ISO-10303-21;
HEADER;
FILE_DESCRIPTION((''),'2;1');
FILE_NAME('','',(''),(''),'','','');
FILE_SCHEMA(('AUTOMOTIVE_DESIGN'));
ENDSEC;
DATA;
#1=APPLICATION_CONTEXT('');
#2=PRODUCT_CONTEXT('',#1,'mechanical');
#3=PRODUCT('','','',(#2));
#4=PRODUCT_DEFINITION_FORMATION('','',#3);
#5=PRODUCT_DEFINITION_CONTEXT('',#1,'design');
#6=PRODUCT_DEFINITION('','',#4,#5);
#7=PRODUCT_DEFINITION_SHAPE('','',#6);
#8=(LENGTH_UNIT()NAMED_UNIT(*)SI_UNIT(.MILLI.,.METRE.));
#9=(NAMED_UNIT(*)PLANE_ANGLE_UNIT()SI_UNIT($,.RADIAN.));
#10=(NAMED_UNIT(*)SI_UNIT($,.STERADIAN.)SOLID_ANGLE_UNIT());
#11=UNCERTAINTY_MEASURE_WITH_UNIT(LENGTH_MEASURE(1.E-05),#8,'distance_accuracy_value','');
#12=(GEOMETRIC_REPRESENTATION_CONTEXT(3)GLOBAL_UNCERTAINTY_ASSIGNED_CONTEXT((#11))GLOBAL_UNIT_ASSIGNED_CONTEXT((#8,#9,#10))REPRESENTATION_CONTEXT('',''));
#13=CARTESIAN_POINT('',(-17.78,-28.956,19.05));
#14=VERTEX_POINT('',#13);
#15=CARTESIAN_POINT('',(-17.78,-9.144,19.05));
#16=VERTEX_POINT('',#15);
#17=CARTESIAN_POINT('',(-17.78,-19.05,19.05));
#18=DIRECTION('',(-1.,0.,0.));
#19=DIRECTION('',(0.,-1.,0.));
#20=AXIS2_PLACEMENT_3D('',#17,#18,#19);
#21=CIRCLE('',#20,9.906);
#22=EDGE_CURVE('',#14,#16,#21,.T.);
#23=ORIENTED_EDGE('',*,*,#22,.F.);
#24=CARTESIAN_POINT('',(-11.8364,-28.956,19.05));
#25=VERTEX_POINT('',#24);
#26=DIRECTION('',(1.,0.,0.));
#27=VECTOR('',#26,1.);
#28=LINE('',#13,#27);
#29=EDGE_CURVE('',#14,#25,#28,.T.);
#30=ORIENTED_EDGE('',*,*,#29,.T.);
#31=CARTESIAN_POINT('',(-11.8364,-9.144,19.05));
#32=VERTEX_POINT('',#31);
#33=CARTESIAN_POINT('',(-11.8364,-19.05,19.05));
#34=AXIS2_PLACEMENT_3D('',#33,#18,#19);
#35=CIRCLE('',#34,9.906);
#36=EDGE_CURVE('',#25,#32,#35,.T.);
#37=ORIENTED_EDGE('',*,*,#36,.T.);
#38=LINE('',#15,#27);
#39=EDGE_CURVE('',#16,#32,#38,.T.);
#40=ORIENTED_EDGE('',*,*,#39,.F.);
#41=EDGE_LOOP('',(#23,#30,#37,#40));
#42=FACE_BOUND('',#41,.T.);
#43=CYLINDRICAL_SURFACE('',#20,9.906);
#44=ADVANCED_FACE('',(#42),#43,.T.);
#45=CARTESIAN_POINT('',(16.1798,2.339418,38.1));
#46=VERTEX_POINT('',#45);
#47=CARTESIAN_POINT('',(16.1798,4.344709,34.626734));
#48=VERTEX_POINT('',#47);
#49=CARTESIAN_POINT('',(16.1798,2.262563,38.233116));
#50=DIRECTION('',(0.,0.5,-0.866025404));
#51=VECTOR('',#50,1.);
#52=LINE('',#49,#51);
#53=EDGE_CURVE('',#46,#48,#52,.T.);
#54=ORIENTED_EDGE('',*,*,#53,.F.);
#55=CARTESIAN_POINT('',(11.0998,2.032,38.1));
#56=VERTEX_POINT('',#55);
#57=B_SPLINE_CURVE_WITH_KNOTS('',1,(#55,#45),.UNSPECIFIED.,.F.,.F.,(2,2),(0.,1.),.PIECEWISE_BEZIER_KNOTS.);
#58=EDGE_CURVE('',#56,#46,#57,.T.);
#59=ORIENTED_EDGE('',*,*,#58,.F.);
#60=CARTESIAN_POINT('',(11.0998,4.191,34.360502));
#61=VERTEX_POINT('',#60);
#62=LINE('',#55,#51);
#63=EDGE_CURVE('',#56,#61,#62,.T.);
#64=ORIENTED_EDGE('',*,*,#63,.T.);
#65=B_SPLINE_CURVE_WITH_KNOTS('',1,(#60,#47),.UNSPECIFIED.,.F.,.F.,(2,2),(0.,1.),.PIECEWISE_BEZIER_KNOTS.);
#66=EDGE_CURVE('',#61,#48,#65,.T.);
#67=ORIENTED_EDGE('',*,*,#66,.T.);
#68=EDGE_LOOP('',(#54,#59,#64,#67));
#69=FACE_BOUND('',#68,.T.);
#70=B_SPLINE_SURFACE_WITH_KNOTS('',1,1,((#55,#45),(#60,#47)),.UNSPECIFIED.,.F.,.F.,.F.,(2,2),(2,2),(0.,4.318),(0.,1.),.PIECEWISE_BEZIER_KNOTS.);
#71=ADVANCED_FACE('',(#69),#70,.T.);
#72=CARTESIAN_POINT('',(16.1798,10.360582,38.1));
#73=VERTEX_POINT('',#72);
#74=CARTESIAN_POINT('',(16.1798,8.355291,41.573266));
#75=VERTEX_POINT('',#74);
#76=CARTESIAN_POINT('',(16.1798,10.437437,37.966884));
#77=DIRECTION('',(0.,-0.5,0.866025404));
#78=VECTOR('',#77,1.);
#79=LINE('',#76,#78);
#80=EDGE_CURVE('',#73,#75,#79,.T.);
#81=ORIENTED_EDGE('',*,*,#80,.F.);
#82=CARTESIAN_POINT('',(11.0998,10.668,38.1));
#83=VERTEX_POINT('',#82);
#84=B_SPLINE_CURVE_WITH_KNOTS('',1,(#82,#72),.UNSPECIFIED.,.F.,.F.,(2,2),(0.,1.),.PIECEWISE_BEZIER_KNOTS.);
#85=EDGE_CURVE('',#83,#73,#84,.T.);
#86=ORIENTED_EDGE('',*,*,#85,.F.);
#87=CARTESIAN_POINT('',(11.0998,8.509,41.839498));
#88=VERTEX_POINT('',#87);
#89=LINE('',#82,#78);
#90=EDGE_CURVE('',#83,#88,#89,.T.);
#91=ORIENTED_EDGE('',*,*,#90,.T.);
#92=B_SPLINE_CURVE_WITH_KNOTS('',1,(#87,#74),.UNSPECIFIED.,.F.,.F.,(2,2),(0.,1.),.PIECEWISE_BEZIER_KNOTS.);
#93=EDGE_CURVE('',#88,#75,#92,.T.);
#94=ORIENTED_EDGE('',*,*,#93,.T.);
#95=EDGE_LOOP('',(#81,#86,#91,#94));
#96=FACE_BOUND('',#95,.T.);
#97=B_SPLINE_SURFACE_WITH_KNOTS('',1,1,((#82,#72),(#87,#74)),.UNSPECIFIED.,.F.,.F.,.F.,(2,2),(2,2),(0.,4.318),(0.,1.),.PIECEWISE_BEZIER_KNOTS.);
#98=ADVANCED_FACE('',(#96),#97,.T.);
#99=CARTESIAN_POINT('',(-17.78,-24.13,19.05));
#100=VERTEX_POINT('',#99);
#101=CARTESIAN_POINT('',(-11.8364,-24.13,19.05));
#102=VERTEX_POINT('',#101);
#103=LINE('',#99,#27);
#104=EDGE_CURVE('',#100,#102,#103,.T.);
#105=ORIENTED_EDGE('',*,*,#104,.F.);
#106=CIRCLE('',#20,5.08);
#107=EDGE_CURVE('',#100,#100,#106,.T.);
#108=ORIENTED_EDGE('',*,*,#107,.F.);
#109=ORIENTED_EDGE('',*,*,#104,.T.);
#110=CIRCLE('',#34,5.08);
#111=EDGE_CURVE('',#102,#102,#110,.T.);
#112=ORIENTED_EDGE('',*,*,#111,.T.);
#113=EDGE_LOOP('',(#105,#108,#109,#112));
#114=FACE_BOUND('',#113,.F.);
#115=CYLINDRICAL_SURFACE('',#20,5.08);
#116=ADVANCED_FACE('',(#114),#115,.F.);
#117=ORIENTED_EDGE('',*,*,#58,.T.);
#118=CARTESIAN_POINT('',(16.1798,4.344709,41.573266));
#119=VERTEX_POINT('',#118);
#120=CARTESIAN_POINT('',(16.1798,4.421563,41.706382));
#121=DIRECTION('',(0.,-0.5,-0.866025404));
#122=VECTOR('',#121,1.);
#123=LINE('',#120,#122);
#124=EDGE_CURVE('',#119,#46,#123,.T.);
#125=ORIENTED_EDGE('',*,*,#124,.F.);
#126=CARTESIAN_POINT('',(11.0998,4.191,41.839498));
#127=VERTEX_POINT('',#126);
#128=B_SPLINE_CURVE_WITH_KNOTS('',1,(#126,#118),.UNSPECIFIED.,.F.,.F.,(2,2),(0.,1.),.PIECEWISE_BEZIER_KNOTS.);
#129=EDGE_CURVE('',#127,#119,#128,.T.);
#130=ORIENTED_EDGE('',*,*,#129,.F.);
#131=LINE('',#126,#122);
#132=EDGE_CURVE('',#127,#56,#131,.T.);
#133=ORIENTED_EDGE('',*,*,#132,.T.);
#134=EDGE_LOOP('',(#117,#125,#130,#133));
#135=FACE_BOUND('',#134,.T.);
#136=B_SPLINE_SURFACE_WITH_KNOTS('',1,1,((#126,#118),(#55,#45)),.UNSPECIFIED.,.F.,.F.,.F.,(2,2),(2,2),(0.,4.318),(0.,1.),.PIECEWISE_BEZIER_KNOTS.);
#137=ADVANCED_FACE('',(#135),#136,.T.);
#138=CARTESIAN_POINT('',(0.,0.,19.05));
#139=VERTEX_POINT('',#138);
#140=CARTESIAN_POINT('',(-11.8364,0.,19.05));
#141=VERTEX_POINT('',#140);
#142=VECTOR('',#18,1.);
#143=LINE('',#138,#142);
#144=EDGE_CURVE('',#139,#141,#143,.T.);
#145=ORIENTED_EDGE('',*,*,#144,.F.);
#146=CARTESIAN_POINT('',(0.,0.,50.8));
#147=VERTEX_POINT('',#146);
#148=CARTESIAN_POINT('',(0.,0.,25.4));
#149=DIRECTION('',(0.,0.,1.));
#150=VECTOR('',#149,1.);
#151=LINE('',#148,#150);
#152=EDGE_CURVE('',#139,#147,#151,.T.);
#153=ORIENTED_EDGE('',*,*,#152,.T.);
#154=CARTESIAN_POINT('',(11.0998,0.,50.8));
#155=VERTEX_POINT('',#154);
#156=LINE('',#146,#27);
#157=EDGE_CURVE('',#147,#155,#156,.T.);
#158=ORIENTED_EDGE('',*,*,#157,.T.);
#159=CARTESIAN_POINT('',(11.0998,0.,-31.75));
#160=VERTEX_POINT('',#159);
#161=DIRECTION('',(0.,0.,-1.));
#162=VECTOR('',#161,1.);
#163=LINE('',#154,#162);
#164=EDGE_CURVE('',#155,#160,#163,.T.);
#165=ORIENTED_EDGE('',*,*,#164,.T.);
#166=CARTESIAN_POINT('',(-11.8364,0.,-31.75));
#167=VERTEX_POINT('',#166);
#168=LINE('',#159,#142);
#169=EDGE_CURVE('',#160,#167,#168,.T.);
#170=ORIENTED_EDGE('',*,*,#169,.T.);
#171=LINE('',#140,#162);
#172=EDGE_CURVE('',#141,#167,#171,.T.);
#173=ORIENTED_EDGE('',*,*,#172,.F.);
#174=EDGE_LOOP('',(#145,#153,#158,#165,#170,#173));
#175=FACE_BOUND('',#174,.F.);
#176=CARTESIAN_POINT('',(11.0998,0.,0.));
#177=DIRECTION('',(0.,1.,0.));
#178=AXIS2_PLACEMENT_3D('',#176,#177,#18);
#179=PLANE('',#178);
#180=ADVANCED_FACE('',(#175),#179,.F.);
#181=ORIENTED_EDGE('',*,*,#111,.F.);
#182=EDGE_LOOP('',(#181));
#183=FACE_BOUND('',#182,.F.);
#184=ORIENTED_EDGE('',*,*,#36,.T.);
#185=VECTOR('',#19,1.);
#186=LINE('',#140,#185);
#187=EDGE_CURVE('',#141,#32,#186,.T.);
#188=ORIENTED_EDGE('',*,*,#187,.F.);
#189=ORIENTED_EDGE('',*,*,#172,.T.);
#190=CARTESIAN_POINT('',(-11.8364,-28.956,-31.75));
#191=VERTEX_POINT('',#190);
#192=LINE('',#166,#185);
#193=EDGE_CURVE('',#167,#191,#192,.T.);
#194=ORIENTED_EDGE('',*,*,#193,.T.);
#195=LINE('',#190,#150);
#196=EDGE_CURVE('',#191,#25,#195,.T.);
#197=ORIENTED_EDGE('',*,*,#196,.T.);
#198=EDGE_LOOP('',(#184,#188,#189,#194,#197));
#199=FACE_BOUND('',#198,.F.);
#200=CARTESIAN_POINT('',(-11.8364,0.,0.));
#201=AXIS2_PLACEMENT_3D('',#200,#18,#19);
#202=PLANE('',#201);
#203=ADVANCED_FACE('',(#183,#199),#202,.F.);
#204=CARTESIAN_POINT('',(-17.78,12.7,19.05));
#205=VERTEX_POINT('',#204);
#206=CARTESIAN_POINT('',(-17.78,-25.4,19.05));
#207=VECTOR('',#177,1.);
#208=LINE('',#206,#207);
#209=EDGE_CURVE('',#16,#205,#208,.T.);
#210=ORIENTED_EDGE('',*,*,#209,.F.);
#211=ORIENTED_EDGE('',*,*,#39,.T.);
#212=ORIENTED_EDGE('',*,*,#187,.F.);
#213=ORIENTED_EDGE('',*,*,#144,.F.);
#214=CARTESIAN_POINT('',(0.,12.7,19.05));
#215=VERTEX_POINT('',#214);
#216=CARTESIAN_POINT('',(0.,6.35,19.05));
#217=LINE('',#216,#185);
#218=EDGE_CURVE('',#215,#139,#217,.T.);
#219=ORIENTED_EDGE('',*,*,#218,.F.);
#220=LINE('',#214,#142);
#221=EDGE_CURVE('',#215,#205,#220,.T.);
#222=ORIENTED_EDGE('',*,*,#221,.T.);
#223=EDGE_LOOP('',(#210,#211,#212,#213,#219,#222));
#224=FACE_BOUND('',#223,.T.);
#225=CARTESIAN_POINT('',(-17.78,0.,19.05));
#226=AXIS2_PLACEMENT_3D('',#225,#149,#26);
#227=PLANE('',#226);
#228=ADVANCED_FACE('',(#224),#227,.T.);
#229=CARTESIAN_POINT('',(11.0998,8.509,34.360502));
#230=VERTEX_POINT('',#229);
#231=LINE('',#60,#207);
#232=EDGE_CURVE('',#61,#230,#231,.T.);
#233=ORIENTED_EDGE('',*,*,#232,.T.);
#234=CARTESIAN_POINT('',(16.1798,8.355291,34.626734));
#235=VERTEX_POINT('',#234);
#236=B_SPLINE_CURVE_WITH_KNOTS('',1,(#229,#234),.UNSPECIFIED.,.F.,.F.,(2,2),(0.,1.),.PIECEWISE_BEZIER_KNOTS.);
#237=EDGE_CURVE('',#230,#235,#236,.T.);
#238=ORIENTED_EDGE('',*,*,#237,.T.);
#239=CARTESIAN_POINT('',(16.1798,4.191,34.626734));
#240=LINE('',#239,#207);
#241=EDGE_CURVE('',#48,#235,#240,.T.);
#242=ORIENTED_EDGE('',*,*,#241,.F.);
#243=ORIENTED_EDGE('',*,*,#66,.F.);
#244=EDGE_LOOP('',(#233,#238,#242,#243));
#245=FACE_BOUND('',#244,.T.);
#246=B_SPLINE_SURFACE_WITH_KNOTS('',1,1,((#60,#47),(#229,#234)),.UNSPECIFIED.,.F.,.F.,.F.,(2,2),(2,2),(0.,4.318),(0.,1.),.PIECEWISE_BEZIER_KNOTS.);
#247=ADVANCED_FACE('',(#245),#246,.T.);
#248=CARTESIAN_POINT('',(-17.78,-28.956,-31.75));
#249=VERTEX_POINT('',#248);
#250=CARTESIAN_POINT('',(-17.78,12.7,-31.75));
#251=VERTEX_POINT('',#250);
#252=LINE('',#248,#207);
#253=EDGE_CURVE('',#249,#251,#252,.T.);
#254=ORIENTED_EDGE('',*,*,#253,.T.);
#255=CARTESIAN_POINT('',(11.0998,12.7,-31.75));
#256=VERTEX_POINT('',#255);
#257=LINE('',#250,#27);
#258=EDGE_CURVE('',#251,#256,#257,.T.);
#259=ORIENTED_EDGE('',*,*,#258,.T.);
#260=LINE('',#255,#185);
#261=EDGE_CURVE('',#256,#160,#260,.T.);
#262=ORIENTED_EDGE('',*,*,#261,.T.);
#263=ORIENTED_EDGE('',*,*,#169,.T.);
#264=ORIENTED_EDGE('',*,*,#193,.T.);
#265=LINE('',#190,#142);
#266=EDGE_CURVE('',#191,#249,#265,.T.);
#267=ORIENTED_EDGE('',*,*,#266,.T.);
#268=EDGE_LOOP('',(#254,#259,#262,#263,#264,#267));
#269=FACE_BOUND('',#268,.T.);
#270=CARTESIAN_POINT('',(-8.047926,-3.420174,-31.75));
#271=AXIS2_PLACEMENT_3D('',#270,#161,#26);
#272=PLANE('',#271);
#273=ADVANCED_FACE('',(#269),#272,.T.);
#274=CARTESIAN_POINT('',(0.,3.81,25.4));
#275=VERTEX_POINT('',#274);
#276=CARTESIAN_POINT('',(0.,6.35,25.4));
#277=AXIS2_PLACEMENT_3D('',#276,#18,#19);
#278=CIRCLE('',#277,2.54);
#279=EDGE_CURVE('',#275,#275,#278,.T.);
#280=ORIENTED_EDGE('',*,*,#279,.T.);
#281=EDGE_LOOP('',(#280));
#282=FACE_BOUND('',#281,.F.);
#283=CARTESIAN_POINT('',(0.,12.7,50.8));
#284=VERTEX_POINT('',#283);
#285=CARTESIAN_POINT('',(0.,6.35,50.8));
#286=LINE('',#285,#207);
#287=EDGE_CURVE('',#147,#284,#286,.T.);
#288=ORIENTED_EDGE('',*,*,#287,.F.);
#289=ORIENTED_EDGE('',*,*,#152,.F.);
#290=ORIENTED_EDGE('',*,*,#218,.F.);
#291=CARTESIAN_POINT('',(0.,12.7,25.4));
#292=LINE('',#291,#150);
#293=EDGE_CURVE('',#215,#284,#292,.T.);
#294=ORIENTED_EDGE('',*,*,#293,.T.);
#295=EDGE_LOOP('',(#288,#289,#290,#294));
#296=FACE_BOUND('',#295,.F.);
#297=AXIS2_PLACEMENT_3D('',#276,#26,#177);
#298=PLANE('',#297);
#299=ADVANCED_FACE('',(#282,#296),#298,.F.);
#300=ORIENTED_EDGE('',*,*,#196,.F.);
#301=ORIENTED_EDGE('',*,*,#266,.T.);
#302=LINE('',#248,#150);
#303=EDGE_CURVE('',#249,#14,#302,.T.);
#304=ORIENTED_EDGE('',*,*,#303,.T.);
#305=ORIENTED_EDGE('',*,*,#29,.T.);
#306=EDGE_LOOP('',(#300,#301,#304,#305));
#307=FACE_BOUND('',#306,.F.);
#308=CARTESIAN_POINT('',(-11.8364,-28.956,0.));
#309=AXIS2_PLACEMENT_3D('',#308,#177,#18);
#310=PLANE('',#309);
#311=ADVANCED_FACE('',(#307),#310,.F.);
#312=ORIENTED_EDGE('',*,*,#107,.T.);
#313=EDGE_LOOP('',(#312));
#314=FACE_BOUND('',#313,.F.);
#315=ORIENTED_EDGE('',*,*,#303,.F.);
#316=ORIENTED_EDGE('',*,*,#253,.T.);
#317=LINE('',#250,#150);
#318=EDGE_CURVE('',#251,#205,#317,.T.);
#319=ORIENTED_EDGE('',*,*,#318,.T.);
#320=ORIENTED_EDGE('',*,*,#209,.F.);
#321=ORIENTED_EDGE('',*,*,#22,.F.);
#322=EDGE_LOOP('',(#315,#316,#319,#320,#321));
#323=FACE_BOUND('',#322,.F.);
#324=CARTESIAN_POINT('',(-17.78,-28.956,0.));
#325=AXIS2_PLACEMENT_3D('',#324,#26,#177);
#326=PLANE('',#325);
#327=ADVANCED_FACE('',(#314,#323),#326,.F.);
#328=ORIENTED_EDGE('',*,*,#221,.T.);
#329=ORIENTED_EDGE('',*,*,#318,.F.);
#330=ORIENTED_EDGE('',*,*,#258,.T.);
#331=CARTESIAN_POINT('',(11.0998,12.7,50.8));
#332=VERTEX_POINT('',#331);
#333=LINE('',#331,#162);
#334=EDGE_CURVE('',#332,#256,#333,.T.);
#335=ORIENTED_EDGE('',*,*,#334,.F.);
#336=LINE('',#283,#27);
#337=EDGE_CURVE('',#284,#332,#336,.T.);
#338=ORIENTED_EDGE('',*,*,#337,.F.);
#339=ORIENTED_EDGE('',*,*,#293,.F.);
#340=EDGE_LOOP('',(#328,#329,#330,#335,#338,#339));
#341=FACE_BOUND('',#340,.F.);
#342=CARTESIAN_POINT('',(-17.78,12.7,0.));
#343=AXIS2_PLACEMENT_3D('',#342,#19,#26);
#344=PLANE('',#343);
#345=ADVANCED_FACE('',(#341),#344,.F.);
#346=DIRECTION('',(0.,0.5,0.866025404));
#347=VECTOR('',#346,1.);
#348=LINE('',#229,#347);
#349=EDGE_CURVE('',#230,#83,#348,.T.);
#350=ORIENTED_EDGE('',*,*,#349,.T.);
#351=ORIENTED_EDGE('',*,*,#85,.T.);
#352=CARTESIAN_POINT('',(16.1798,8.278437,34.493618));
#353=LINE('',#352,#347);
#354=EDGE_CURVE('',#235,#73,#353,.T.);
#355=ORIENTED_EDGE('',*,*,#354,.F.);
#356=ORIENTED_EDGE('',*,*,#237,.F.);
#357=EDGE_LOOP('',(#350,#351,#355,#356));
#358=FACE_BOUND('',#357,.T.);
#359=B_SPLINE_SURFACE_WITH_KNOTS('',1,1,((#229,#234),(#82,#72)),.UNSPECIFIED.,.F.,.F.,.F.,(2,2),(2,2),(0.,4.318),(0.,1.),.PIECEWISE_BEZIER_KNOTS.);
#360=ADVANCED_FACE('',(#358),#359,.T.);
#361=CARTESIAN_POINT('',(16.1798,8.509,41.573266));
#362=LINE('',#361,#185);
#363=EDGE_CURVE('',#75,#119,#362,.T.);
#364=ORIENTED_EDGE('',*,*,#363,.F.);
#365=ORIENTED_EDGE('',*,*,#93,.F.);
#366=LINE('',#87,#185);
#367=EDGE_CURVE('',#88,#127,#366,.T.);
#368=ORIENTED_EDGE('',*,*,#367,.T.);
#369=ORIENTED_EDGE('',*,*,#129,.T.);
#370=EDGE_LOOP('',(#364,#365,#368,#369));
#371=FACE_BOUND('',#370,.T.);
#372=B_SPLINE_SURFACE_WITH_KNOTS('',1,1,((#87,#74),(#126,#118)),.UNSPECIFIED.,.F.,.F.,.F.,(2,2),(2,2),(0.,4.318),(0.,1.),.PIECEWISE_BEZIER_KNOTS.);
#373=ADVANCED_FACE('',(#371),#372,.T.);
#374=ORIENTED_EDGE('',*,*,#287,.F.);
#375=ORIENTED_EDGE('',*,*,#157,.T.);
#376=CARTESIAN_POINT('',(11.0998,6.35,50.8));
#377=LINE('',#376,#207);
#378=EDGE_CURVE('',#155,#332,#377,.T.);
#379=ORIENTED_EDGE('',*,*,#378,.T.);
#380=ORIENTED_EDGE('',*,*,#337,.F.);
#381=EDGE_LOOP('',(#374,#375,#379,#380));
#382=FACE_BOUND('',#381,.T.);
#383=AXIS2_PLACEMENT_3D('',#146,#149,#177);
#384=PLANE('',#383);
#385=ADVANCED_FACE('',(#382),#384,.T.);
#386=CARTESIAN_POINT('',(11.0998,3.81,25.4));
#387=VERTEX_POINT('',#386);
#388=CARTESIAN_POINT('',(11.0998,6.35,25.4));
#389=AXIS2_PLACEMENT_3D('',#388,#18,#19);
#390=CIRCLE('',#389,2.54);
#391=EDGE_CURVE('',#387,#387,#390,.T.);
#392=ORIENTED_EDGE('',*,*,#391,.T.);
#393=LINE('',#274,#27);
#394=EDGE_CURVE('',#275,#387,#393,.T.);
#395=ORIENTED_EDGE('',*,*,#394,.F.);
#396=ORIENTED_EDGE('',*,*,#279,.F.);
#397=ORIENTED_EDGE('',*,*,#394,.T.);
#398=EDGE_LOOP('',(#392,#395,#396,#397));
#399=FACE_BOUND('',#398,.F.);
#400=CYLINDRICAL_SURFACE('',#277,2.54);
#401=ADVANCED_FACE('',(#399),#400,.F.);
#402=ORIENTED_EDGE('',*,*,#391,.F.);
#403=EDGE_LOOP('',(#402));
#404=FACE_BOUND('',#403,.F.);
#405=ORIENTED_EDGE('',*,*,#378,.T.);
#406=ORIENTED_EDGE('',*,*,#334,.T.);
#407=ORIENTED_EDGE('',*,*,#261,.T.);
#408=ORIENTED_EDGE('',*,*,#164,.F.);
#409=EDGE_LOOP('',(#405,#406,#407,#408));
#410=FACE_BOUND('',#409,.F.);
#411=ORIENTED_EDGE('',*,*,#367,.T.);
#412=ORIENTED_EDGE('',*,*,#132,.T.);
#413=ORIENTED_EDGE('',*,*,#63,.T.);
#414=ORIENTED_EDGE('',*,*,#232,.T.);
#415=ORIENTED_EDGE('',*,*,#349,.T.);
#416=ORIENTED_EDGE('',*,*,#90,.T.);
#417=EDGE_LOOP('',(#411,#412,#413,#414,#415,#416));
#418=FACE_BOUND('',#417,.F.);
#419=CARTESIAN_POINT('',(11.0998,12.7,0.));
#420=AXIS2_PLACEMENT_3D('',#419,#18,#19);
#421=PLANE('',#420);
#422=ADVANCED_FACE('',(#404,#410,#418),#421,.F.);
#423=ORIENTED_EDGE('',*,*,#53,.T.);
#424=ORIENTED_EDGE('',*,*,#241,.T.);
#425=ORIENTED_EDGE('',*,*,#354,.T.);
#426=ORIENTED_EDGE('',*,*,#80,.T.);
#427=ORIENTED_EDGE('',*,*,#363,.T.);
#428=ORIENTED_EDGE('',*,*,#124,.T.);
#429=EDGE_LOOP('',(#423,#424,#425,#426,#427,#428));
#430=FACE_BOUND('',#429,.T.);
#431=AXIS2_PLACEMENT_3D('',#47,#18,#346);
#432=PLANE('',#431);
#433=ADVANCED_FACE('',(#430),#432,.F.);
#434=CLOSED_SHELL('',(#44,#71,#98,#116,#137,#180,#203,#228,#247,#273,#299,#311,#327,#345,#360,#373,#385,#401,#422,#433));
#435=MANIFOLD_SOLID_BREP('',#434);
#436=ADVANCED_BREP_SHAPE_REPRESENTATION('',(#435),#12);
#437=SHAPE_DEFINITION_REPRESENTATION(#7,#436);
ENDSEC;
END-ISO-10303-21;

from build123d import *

# Parameters (mm, degrees)
F0_W      = 12.7
F0_H      = 50.8
F1_DEPTH  = 11.0998
F3_DEPTH  = 5.08
F3_TAPER  = 3
F4_R      = 2.54
F5_DEPTH  = 16.1808001
F6_W      = 12.7
F6_H      = 19.05
F7_DEPTH  = 17.78
F8_W      = 5.9436
F8_H      = 19.05
F9_DEPTH  = 25.4
F10_W     = 5.9436
F10_H     = 12.7
F11_DEPTH = 6.35
F12_R     = 6.34999
F13_R     = 5.08
F14_DEPTH = 33.9608001
F16_DEPTH = 5.9436
F18_DEPTH = 31.75


# Not quite as in the source:
# - a fillet or chamfer is up to 0.001 mm smaller than in the source, because OpenCascade refuses the exact size


with BuildPart() as f1:
    # F0 (on Right) → F1 (new body)
    with BuildSketch(Plane.YZ):
        with Locations((6.35, 25.4)):
            Rectangle(F0_W, F0_H)
    extrude(amount=F1_DEPTH)

    # F2 (on face) → F3 (join)
    with BuildSketch(Plane.YZ.offset(11.0998)):
        Polygon((4.191, 34.3605023065), (8.509, 34.3605023065), (10.668, 38.1), (8.509, 41.8394976935), (4.191, 41.8394976935), (2.032, 38.1), align=None)
    extrude(amount=F3_DEPTH, taper=F3_TAPER)

    # F4 (on face) → F5 (cut, through all)
    with BuildSketch(Plane(origin=(0, 0, 0), x_dir=(0, -1, 0), z_dir=(-1, 0, 0))):
        with Locations((-6.35, 25.4)):
            Circle(F4_R)
    extrude(amount=-F5_DEPTH, mode=Mode.SUBTRACT)

    # F6 (on face) → F7 (join)
    with BuildSketch(Plane(origin=(0, 0, 0), x_dir=(0, -1, 0), z_dir=(-1, 0, 0))):
        with Locations((-6.35, 9.525)):
            Rectangle(F6_W, F6_H)
    extrude(amount=F7_DEPTH)

    # F8 (on face) → F9 (join)
    with BuildSketch(Plane.XZ):
        with Locations((-14.8082, 9.525)):
            Rectangle(F8_W, F8_H)
    extrude(amount=F9_DEPTH)

    # F10 (on face) → F11 (join)
    with BuildSketch(Plane.XY.offset(19.05)):
        with Locations((-14.8082, -19.05)):
            Rectangle(F10_W, F10_H)
    extrude(amount=F11_DEPTH)

    # F12 (radius 6.35 in the source; OpenCascade refuses exactly that, so slightly less here)
    f12_edges = [f1.edges().sort_by_distance(p)[0] for p in [
        (-14.8082, -12.7, 25.4),
        (-14.8082, -25.4, 25.4),
    ]]
    fillet(f12_edges, radius=F12_R)

    # F13 (on face) → F14 (cut, through all)
    with BuildSketch(Plane(origin=(-17.78, 0, 0), x_dir=(0, -1, 0), z_dir=(-1, 0, 0))):
        with Locations((19.05, 19.05)):
            Circle(F13_R)
    extrude(amount=-F14_DEPTH, mode=Mode.SUBTRACT)

    # F15 (on face) → F16 (join, through all)
    with BuildSketch(Plane(origin=(-17.78, 0, 0), x_dir=(0, -1, 0), z_dir=(-1, 0, 0))):
        with BuildLine():
            Line((28.956, 0), (28.956, 19.05))
            ThreePointArc((28.956, 19.05), (19.05, 28.956), (9.144, 19.05))
            Line((9.144, 19.05), (12.7, 19.05))
            ThreePointArc((12.7, 19.05), (19.05, 25.4), (25.4, 19.05))
            Line((25.4, 19.05), (25.4, 0))
            Line((25.4, 0), (28.956, 0))
        make_face()
    extrude(amount=-F16_DEPTH)

    # F17 (on face) → F18 (join)
    with BuildSketch(Plane(origin=(0, 0, 0), x_dir=(1, 0, 0), z_dir=(0, 0, -1))):
        Polygon((-17.78, -12.7), (11.0998, -12.7), (11.0998, 0), (-11.8364, 0), (-11.8364, 28.956), (-17.78, 28.956), align=None)
    extrude(amount=F18_DEPTH)


solid = f1.part
